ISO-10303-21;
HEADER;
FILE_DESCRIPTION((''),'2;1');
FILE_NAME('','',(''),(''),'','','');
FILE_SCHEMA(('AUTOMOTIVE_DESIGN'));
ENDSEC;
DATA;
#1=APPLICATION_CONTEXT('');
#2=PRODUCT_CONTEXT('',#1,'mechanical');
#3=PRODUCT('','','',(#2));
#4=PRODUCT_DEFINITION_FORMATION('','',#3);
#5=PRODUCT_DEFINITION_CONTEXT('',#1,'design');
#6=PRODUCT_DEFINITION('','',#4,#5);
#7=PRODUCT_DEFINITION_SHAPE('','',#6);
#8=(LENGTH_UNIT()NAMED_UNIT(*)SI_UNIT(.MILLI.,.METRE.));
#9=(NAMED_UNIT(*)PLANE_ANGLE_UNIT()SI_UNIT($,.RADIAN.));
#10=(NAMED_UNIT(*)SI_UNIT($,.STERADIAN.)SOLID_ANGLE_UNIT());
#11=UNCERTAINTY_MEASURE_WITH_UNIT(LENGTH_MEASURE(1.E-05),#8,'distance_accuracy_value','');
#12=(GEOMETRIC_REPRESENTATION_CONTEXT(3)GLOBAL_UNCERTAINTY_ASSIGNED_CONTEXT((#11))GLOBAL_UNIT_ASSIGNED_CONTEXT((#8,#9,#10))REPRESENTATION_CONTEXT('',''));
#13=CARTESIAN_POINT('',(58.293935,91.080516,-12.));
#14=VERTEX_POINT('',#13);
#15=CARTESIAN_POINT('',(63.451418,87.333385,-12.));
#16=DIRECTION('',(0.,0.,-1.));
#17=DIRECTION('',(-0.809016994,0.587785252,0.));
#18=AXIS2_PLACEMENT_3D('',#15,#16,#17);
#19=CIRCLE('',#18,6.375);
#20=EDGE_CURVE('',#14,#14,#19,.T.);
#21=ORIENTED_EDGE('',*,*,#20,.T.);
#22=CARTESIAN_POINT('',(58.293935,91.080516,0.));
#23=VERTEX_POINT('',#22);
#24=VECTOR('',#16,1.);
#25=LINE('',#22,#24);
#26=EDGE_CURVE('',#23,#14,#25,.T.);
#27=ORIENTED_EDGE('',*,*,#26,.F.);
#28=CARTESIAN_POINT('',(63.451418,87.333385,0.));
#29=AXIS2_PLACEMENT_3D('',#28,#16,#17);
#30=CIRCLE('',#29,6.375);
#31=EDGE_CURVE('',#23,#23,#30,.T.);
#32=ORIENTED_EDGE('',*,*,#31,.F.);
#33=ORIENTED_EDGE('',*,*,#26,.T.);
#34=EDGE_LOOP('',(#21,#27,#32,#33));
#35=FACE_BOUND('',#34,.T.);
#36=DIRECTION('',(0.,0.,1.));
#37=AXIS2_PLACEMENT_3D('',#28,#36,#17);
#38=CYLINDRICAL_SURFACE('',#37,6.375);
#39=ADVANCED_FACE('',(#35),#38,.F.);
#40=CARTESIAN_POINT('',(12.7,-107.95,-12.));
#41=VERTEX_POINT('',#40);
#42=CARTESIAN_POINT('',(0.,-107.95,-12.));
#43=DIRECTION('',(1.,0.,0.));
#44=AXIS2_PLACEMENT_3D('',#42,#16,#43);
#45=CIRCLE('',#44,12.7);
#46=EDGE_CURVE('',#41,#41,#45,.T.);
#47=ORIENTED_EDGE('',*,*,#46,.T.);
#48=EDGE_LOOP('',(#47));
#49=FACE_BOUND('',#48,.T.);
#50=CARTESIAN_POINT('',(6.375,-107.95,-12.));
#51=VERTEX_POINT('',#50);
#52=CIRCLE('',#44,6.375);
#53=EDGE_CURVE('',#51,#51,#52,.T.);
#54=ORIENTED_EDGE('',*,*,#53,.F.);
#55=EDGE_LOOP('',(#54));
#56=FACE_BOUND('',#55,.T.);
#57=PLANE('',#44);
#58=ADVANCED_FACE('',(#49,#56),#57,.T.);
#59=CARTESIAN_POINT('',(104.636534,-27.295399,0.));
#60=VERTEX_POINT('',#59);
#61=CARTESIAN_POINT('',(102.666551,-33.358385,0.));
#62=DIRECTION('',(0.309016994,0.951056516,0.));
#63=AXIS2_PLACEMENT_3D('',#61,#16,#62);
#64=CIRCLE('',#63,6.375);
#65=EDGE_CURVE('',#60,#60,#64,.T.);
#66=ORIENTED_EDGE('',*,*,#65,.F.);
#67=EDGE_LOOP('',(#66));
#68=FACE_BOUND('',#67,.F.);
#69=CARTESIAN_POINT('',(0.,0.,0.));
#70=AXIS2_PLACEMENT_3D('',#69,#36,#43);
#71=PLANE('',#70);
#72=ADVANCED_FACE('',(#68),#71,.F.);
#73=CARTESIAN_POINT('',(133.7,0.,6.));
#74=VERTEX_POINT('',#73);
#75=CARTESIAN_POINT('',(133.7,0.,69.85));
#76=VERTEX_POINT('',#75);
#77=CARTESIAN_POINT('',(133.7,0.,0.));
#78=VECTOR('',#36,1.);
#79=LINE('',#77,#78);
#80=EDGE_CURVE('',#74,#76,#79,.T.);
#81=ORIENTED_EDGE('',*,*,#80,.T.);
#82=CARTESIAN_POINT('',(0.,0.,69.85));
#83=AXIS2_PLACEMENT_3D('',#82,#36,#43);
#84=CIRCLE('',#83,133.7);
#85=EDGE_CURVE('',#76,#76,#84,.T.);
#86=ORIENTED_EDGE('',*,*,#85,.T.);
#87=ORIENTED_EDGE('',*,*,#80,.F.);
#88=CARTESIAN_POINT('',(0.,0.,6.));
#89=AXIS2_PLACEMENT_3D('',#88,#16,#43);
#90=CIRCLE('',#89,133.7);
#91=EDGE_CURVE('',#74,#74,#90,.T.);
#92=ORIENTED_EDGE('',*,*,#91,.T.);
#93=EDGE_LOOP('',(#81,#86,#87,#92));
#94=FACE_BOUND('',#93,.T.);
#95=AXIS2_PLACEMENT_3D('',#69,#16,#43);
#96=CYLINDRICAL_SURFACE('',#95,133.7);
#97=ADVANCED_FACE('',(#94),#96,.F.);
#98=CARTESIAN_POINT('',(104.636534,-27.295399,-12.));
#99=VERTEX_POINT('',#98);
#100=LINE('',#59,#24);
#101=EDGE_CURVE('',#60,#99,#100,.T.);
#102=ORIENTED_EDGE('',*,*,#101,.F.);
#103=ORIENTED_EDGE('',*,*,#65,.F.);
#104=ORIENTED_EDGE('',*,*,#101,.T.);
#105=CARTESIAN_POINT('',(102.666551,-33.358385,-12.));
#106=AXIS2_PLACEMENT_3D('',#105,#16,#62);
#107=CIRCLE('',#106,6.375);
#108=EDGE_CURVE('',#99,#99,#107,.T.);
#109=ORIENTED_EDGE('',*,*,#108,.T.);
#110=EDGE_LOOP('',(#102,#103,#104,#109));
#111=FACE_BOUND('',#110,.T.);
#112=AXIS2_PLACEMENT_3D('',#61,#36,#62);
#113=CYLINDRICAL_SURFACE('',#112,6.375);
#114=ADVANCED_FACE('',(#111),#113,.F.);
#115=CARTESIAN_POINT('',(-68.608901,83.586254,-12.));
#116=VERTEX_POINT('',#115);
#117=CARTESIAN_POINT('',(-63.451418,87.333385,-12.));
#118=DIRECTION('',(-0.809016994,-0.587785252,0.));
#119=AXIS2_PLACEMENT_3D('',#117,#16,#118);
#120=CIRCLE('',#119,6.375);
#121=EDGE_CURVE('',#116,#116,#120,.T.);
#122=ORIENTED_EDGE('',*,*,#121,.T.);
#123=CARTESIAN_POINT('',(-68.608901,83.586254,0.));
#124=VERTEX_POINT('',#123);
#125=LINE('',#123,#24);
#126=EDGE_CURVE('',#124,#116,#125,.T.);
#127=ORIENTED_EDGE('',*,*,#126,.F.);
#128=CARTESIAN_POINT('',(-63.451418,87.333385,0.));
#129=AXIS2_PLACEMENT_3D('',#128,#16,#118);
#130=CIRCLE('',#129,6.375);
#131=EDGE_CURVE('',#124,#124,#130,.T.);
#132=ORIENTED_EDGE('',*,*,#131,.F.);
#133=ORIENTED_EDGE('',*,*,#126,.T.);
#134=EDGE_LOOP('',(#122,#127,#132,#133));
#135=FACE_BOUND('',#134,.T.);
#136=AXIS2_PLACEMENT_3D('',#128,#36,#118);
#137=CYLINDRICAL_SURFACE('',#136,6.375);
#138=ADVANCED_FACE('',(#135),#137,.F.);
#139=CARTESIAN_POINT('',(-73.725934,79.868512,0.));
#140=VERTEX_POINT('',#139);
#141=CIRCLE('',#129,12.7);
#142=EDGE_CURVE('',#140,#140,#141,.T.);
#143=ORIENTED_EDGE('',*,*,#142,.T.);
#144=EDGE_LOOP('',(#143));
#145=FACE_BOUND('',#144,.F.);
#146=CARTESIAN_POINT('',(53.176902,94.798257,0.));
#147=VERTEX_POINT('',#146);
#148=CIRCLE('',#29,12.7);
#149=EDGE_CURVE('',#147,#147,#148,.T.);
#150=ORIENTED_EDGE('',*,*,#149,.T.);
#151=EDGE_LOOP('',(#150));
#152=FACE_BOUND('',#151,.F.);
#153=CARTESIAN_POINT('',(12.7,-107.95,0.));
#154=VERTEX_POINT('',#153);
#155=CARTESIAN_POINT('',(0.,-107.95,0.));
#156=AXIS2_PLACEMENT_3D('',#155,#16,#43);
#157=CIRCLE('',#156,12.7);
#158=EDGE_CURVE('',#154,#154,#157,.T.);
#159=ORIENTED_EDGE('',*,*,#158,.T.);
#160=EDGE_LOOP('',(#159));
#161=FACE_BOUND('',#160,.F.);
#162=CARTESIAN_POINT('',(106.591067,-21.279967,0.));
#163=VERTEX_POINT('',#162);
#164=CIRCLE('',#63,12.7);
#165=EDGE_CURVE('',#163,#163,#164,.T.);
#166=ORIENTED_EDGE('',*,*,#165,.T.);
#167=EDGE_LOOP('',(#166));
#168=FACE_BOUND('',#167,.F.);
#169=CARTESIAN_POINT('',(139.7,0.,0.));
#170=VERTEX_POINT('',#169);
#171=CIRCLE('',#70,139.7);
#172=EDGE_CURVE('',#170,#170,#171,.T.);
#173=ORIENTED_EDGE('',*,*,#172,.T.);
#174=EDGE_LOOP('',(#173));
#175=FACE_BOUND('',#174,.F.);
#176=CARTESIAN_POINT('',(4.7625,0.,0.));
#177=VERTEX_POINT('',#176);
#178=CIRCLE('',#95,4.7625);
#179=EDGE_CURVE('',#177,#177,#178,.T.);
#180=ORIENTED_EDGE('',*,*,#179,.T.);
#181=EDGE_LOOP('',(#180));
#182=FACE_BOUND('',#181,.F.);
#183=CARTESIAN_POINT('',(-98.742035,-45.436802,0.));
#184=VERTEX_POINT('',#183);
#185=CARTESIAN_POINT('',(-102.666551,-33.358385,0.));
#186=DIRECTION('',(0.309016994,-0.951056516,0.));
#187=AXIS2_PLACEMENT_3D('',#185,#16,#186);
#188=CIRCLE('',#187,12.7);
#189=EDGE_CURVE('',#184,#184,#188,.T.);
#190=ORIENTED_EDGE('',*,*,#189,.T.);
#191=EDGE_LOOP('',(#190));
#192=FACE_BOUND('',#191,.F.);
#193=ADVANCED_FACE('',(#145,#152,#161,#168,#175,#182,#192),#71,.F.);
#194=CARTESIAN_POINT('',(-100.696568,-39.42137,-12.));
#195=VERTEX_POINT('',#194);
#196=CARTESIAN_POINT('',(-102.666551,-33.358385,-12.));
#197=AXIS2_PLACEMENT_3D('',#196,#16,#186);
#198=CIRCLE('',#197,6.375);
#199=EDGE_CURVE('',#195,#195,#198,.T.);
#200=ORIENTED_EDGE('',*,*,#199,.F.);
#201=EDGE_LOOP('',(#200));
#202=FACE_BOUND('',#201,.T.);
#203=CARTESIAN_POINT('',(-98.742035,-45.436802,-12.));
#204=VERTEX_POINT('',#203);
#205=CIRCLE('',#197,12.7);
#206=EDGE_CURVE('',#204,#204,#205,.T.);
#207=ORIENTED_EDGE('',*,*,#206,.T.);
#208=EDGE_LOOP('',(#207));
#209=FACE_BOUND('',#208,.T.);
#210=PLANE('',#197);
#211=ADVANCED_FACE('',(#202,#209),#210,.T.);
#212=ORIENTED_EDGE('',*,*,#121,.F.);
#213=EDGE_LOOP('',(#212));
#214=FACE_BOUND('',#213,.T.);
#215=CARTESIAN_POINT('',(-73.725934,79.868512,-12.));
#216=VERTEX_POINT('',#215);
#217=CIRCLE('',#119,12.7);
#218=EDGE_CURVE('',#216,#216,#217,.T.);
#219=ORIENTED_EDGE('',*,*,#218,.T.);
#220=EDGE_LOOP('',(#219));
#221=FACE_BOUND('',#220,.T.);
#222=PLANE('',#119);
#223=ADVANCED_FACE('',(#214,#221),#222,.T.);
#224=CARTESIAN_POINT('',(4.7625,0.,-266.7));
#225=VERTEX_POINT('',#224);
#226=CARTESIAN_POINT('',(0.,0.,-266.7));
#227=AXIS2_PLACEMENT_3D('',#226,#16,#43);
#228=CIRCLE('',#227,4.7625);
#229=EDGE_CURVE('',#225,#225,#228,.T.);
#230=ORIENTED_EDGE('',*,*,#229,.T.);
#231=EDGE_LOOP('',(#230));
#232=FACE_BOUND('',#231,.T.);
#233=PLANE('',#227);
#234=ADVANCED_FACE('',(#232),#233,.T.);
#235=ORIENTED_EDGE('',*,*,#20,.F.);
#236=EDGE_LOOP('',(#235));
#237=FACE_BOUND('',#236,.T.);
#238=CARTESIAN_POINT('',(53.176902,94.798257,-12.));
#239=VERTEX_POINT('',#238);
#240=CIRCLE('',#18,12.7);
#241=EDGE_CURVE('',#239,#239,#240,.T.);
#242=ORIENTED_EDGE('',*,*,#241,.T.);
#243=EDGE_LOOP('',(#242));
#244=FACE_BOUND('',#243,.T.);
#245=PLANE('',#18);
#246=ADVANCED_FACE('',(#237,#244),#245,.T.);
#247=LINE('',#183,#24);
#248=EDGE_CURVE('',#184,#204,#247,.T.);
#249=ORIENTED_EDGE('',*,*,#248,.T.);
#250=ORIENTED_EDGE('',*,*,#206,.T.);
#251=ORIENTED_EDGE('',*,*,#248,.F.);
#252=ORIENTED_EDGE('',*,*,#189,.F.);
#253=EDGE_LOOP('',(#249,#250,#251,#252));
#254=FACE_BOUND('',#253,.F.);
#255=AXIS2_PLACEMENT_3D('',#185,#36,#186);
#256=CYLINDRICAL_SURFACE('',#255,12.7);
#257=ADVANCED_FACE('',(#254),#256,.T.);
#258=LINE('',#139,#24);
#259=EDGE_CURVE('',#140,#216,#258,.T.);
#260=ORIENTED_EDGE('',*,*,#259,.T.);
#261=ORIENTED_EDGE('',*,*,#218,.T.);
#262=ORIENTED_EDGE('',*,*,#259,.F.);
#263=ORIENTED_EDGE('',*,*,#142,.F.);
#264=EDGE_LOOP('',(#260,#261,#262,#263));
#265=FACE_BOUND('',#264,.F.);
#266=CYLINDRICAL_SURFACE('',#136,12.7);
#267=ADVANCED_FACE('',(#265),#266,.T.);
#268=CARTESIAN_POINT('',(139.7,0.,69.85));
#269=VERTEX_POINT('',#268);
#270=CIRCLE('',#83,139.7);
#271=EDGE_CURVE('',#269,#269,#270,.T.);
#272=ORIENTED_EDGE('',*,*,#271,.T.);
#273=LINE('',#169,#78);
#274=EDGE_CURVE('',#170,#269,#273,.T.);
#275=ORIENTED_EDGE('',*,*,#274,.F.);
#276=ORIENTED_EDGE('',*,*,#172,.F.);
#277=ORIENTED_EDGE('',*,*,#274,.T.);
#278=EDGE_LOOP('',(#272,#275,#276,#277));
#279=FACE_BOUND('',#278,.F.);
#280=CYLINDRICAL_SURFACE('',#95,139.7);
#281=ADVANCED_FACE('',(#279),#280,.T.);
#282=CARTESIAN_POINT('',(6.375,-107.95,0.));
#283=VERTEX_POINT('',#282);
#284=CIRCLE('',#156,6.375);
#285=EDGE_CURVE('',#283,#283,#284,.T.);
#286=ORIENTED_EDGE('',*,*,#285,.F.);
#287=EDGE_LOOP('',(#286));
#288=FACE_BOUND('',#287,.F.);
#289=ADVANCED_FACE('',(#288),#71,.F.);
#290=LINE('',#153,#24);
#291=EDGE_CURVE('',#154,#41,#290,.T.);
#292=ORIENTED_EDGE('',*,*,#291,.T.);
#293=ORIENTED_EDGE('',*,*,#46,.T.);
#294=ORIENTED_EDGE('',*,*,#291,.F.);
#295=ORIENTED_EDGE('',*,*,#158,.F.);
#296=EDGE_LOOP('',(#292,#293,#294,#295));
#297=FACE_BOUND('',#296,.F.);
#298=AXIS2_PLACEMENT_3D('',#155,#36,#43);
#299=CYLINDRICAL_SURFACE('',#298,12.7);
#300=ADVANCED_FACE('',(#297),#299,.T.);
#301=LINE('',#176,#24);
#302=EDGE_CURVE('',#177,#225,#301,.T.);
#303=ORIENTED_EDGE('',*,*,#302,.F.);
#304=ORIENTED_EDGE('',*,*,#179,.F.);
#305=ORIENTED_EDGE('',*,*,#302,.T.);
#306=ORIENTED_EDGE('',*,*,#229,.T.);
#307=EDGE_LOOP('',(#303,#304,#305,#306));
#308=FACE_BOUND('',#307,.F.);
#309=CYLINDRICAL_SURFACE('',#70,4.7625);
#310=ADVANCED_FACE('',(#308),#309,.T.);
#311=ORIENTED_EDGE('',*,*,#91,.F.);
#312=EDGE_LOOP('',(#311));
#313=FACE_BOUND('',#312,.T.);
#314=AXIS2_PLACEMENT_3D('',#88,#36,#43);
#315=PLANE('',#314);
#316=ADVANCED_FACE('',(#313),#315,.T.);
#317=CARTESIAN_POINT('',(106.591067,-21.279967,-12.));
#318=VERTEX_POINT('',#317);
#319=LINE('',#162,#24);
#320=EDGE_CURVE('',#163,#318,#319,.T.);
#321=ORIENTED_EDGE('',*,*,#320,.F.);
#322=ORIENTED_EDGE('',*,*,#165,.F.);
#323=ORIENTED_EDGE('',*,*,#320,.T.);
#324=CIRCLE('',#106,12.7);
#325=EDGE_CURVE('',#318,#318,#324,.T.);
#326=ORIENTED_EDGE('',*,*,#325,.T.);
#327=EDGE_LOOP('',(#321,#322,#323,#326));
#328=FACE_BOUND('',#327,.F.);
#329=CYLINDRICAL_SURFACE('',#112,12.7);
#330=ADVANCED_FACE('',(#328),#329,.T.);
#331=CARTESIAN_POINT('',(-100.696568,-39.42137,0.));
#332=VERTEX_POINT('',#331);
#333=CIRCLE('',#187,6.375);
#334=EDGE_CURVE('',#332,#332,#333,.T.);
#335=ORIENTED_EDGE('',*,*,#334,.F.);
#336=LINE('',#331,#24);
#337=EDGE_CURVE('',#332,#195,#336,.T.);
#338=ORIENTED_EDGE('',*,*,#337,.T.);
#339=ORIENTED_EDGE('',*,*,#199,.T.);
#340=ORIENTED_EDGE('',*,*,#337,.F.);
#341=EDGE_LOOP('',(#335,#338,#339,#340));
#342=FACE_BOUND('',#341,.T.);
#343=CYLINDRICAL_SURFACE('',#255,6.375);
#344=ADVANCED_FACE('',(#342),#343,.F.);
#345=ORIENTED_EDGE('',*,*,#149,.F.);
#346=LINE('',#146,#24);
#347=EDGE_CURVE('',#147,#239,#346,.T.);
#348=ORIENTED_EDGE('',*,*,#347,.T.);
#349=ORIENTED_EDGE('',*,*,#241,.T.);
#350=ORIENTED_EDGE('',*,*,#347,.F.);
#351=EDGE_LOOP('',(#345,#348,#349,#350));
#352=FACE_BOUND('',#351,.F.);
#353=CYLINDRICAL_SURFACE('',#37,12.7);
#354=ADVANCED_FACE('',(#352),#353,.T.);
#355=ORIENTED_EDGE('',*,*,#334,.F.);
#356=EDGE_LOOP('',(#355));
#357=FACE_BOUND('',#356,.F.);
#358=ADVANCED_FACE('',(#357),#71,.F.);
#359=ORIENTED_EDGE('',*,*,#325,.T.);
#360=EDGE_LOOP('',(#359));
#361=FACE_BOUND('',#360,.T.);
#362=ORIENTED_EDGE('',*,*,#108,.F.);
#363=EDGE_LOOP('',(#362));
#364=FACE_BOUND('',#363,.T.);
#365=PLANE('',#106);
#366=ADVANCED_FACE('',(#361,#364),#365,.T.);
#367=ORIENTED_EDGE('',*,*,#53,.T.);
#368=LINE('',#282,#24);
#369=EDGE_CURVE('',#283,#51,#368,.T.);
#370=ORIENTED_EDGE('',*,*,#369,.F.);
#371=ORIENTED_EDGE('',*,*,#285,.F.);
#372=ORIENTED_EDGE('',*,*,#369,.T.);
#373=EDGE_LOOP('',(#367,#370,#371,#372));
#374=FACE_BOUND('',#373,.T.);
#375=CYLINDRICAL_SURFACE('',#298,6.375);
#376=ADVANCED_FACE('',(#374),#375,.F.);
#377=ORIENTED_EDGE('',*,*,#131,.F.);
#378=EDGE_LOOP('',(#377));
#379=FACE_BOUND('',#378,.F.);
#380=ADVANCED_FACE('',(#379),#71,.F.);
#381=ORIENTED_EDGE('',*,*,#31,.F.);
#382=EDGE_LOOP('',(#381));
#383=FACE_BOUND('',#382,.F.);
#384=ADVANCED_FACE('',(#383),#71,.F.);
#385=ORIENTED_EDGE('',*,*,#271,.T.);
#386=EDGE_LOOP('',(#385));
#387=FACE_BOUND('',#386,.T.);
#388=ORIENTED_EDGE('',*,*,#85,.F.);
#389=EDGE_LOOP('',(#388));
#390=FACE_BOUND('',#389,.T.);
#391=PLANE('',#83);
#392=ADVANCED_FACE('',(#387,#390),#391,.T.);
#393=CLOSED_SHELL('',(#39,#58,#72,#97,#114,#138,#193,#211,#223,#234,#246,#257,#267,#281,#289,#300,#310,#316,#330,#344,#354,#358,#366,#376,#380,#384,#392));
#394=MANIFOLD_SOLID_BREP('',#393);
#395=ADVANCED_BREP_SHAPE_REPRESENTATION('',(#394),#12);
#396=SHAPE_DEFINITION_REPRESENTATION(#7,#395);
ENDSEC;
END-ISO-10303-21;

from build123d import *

# Parameters (mm, degrees)
F0_R            = 139.7
F1_DEPTH        = 69.85
F2_T            = -6
F3_R            = 12.7
F3_R_2          = 6.375
F4_DEPTH        = 12
F4_COPIES_COUNT = 5
F6_R            = 4.7625
F7_DEPTH        = 266.7


# Not quite as in the source:
# - a pattern or mirror of a feature is missing from the dataset's text; its kind, count and spacing are read off the source's solid


with BuildPart() as f1:
    # F0 (on Top) → F1 (new body)
    with BuildSketch(Plane.XY):
        Circle(F0_R)
    extrude(amount=F1_DEPTH)

    # F2
    f2_openings = [f1.faces().sort_by_distance(p)[0] for p in [
        (0, 0, 69.85),
    ]]
    offset(amount=F2_T, openings=f2_openings)

    # F3 (on face) → F4 (join)
    with BuildSketch(Plane(origin=(0, 0, 0), x_dir=(1, 0, 0), z_dir=(0, 0, -1))):
        with Locations((0, 107.95)):
            Circle(F3_R)
        with Locations((0, 107.95)):
            Circle(F3_R_2, mode=Mode.SUBTRACT)
    f4 = extrude(amount=F4_DEPTH)

    # F4_copies: F4 ×5 about axis
    f4_copies_axis = Axis((0, 0, 0), (0, 0, 1))
    for i in range(1, F4_COPIES_COUNT):
        add(f4.rotate(f4_copies_axis, i * 360 / F4_COPIES_COUNT))

    # F6 (on face) → F7 (join)
    with BuildSketch(Plane(origin=(0, 0, 0), x_dir=(1, 0, 0), z_dir=(0, 0, -1))):
        Circle(F6_R)
    extrude(amount=F7_DEPTH)


solid = f1.part
